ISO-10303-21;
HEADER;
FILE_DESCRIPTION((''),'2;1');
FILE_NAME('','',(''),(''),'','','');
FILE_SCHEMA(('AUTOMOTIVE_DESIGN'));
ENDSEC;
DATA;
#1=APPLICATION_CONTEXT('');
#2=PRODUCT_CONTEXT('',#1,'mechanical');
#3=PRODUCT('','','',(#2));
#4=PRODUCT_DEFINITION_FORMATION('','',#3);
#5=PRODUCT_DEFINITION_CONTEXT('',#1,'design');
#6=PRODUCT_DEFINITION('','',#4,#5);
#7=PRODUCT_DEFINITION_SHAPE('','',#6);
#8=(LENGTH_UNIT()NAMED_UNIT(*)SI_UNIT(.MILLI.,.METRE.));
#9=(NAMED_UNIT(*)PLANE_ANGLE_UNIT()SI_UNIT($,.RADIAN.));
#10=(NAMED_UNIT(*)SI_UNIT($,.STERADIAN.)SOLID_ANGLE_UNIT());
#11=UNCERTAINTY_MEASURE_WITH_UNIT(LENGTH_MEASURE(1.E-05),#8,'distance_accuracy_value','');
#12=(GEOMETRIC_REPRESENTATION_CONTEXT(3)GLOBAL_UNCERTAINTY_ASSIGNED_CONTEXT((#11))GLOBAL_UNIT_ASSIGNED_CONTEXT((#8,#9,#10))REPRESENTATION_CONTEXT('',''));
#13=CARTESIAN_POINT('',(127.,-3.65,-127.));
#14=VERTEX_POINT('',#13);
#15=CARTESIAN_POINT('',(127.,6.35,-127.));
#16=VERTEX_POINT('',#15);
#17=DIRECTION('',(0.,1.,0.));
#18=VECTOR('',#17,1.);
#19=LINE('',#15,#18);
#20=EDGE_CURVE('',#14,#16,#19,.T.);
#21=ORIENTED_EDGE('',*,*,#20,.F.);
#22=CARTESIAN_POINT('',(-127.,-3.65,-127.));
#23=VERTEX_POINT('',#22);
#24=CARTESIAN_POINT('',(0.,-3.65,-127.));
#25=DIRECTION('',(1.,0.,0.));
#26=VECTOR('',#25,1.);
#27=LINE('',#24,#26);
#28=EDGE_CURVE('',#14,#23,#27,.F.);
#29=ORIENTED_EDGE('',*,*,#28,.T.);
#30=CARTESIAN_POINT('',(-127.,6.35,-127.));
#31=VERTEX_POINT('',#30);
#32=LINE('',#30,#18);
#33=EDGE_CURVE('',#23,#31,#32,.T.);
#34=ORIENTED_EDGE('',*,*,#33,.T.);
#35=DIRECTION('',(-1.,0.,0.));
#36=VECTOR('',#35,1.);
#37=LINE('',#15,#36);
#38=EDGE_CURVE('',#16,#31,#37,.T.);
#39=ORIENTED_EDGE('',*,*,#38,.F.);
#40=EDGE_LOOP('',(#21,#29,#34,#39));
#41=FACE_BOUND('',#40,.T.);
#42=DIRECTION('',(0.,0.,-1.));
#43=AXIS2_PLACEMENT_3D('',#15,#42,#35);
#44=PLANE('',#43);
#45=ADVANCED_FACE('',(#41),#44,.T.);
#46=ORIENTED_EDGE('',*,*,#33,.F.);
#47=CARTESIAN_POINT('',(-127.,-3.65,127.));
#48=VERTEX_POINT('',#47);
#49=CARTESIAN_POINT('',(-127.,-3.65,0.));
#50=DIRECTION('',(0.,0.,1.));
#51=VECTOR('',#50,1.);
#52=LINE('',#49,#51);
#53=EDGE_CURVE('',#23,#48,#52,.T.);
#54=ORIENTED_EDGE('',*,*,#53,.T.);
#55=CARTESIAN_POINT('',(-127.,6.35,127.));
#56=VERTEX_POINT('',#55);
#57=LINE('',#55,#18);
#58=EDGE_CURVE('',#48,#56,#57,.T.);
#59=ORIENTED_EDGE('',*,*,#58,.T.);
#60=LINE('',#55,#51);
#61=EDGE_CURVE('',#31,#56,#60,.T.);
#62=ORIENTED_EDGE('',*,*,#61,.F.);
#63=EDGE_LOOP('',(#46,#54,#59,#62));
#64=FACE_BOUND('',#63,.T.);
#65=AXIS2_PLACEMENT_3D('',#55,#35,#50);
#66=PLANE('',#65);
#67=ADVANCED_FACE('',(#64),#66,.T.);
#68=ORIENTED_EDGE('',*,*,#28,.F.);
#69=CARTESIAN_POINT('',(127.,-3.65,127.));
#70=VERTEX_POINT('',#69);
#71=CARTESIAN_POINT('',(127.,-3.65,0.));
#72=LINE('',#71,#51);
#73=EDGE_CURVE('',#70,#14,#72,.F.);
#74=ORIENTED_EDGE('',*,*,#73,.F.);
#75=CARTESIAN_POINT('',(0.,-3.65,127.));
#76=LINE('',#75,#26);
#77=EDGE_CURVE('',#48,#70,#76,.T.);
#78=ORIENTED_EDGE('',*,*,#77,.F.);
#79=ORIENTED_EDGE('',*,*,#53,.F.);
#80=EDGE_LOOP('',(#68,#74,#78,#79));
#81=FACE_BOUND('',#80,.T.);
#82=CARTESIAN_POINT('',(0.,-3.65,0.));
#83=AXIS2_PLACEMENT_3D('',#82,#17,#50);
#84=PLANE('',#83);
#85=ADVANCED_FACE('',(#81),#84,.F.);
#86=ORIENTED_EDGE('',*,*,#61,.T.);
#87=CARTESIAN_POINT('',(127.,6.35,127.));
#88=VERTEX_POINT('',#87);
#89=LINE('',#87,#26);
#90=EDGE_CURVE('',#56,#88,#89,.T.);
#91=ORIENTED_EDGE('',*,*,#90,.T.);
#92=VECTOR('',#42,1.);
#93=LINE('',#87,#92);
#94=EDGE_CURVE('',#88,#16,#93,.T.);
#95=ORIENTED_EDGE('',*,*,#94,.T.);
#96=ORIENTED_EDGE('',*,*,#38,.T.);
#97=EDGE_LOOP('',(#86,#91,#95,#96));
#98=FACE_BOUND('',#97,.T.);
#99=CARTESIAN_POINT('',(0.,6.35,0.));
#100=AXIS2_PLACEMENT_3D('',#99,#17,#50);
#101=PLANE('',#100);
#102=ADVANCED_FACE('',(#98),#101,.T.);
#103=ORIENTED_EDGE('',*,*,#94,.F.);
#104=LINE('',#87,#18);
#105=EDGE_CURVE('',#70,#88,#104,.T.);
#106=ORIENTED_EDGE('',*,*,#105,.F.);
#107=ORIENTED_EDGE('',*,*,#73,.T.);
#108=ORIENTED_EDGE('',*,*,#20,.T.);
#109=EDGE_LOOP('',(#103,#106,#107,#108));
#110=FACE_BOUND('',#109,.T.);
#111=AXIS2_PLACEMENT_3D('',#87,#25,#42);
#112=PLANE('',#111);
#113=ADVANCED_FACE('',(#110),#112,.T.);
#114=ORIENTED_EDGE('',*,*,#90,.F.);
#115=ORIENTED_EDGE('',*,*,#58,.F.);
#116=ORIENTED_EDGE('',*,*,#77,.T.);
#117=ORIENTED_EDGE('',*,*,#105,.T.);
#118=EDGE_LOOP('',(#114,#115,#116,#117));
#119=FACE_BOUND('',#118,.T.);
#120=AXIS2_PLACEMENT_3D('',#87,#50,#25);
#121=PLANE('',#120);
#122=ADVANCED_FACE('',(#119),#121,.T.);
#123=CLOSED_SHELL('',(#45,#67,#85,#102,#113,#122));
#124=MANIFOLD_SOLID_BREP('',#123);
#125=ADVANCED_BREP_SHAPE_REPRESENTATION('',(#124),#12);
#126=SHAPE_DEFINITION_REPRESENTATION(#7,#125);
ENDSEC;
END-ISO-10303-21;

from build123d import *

# Parameters (mm, degrees)
SKETCH1_W                = 254
SKETCH1_H                = 254
BOSS_EXTRUDE1_DEPTH      = 6.35
CONVERT_SOLID1_START     = -127
CONVERT_SOLID1_OUTLINE_W = 3.65
CONVERT_SOLID1_OUTLINE_H = 254
CONVERT_SOLID1_DEPTH     = 254


# Read off the part's stored shape, not the designer's step: Convert-Solid1
with BuildPart() as part:
    # Sketch1 → Boss-Extrude1 (new body)
    with BuildSketch(Plane(origin=(0, 0, 0), x_dir=(1, 0, 0), z_dir=(0, 1, 0))):
        Rectangle(SKETCH1_W, SKETCH1_H)
    extrude(amount=BOSS_EXTRUDE1_DEPTH)

    # Convert-Solid1 outline → Convert-Solid1 (add)
    with BuildSketch(Plane.YZ.offset(CONVERT_SOLID1_START)):
        with Locations((-1.825, 0)):
            Rectangle(CONVERT_SOLID1_OUTLINE_W, CONVERT_SOLID1_OUTLINE_H)
    extrude(amount=CONVERT_SOLID1_DEPTH)


solid = part.part
